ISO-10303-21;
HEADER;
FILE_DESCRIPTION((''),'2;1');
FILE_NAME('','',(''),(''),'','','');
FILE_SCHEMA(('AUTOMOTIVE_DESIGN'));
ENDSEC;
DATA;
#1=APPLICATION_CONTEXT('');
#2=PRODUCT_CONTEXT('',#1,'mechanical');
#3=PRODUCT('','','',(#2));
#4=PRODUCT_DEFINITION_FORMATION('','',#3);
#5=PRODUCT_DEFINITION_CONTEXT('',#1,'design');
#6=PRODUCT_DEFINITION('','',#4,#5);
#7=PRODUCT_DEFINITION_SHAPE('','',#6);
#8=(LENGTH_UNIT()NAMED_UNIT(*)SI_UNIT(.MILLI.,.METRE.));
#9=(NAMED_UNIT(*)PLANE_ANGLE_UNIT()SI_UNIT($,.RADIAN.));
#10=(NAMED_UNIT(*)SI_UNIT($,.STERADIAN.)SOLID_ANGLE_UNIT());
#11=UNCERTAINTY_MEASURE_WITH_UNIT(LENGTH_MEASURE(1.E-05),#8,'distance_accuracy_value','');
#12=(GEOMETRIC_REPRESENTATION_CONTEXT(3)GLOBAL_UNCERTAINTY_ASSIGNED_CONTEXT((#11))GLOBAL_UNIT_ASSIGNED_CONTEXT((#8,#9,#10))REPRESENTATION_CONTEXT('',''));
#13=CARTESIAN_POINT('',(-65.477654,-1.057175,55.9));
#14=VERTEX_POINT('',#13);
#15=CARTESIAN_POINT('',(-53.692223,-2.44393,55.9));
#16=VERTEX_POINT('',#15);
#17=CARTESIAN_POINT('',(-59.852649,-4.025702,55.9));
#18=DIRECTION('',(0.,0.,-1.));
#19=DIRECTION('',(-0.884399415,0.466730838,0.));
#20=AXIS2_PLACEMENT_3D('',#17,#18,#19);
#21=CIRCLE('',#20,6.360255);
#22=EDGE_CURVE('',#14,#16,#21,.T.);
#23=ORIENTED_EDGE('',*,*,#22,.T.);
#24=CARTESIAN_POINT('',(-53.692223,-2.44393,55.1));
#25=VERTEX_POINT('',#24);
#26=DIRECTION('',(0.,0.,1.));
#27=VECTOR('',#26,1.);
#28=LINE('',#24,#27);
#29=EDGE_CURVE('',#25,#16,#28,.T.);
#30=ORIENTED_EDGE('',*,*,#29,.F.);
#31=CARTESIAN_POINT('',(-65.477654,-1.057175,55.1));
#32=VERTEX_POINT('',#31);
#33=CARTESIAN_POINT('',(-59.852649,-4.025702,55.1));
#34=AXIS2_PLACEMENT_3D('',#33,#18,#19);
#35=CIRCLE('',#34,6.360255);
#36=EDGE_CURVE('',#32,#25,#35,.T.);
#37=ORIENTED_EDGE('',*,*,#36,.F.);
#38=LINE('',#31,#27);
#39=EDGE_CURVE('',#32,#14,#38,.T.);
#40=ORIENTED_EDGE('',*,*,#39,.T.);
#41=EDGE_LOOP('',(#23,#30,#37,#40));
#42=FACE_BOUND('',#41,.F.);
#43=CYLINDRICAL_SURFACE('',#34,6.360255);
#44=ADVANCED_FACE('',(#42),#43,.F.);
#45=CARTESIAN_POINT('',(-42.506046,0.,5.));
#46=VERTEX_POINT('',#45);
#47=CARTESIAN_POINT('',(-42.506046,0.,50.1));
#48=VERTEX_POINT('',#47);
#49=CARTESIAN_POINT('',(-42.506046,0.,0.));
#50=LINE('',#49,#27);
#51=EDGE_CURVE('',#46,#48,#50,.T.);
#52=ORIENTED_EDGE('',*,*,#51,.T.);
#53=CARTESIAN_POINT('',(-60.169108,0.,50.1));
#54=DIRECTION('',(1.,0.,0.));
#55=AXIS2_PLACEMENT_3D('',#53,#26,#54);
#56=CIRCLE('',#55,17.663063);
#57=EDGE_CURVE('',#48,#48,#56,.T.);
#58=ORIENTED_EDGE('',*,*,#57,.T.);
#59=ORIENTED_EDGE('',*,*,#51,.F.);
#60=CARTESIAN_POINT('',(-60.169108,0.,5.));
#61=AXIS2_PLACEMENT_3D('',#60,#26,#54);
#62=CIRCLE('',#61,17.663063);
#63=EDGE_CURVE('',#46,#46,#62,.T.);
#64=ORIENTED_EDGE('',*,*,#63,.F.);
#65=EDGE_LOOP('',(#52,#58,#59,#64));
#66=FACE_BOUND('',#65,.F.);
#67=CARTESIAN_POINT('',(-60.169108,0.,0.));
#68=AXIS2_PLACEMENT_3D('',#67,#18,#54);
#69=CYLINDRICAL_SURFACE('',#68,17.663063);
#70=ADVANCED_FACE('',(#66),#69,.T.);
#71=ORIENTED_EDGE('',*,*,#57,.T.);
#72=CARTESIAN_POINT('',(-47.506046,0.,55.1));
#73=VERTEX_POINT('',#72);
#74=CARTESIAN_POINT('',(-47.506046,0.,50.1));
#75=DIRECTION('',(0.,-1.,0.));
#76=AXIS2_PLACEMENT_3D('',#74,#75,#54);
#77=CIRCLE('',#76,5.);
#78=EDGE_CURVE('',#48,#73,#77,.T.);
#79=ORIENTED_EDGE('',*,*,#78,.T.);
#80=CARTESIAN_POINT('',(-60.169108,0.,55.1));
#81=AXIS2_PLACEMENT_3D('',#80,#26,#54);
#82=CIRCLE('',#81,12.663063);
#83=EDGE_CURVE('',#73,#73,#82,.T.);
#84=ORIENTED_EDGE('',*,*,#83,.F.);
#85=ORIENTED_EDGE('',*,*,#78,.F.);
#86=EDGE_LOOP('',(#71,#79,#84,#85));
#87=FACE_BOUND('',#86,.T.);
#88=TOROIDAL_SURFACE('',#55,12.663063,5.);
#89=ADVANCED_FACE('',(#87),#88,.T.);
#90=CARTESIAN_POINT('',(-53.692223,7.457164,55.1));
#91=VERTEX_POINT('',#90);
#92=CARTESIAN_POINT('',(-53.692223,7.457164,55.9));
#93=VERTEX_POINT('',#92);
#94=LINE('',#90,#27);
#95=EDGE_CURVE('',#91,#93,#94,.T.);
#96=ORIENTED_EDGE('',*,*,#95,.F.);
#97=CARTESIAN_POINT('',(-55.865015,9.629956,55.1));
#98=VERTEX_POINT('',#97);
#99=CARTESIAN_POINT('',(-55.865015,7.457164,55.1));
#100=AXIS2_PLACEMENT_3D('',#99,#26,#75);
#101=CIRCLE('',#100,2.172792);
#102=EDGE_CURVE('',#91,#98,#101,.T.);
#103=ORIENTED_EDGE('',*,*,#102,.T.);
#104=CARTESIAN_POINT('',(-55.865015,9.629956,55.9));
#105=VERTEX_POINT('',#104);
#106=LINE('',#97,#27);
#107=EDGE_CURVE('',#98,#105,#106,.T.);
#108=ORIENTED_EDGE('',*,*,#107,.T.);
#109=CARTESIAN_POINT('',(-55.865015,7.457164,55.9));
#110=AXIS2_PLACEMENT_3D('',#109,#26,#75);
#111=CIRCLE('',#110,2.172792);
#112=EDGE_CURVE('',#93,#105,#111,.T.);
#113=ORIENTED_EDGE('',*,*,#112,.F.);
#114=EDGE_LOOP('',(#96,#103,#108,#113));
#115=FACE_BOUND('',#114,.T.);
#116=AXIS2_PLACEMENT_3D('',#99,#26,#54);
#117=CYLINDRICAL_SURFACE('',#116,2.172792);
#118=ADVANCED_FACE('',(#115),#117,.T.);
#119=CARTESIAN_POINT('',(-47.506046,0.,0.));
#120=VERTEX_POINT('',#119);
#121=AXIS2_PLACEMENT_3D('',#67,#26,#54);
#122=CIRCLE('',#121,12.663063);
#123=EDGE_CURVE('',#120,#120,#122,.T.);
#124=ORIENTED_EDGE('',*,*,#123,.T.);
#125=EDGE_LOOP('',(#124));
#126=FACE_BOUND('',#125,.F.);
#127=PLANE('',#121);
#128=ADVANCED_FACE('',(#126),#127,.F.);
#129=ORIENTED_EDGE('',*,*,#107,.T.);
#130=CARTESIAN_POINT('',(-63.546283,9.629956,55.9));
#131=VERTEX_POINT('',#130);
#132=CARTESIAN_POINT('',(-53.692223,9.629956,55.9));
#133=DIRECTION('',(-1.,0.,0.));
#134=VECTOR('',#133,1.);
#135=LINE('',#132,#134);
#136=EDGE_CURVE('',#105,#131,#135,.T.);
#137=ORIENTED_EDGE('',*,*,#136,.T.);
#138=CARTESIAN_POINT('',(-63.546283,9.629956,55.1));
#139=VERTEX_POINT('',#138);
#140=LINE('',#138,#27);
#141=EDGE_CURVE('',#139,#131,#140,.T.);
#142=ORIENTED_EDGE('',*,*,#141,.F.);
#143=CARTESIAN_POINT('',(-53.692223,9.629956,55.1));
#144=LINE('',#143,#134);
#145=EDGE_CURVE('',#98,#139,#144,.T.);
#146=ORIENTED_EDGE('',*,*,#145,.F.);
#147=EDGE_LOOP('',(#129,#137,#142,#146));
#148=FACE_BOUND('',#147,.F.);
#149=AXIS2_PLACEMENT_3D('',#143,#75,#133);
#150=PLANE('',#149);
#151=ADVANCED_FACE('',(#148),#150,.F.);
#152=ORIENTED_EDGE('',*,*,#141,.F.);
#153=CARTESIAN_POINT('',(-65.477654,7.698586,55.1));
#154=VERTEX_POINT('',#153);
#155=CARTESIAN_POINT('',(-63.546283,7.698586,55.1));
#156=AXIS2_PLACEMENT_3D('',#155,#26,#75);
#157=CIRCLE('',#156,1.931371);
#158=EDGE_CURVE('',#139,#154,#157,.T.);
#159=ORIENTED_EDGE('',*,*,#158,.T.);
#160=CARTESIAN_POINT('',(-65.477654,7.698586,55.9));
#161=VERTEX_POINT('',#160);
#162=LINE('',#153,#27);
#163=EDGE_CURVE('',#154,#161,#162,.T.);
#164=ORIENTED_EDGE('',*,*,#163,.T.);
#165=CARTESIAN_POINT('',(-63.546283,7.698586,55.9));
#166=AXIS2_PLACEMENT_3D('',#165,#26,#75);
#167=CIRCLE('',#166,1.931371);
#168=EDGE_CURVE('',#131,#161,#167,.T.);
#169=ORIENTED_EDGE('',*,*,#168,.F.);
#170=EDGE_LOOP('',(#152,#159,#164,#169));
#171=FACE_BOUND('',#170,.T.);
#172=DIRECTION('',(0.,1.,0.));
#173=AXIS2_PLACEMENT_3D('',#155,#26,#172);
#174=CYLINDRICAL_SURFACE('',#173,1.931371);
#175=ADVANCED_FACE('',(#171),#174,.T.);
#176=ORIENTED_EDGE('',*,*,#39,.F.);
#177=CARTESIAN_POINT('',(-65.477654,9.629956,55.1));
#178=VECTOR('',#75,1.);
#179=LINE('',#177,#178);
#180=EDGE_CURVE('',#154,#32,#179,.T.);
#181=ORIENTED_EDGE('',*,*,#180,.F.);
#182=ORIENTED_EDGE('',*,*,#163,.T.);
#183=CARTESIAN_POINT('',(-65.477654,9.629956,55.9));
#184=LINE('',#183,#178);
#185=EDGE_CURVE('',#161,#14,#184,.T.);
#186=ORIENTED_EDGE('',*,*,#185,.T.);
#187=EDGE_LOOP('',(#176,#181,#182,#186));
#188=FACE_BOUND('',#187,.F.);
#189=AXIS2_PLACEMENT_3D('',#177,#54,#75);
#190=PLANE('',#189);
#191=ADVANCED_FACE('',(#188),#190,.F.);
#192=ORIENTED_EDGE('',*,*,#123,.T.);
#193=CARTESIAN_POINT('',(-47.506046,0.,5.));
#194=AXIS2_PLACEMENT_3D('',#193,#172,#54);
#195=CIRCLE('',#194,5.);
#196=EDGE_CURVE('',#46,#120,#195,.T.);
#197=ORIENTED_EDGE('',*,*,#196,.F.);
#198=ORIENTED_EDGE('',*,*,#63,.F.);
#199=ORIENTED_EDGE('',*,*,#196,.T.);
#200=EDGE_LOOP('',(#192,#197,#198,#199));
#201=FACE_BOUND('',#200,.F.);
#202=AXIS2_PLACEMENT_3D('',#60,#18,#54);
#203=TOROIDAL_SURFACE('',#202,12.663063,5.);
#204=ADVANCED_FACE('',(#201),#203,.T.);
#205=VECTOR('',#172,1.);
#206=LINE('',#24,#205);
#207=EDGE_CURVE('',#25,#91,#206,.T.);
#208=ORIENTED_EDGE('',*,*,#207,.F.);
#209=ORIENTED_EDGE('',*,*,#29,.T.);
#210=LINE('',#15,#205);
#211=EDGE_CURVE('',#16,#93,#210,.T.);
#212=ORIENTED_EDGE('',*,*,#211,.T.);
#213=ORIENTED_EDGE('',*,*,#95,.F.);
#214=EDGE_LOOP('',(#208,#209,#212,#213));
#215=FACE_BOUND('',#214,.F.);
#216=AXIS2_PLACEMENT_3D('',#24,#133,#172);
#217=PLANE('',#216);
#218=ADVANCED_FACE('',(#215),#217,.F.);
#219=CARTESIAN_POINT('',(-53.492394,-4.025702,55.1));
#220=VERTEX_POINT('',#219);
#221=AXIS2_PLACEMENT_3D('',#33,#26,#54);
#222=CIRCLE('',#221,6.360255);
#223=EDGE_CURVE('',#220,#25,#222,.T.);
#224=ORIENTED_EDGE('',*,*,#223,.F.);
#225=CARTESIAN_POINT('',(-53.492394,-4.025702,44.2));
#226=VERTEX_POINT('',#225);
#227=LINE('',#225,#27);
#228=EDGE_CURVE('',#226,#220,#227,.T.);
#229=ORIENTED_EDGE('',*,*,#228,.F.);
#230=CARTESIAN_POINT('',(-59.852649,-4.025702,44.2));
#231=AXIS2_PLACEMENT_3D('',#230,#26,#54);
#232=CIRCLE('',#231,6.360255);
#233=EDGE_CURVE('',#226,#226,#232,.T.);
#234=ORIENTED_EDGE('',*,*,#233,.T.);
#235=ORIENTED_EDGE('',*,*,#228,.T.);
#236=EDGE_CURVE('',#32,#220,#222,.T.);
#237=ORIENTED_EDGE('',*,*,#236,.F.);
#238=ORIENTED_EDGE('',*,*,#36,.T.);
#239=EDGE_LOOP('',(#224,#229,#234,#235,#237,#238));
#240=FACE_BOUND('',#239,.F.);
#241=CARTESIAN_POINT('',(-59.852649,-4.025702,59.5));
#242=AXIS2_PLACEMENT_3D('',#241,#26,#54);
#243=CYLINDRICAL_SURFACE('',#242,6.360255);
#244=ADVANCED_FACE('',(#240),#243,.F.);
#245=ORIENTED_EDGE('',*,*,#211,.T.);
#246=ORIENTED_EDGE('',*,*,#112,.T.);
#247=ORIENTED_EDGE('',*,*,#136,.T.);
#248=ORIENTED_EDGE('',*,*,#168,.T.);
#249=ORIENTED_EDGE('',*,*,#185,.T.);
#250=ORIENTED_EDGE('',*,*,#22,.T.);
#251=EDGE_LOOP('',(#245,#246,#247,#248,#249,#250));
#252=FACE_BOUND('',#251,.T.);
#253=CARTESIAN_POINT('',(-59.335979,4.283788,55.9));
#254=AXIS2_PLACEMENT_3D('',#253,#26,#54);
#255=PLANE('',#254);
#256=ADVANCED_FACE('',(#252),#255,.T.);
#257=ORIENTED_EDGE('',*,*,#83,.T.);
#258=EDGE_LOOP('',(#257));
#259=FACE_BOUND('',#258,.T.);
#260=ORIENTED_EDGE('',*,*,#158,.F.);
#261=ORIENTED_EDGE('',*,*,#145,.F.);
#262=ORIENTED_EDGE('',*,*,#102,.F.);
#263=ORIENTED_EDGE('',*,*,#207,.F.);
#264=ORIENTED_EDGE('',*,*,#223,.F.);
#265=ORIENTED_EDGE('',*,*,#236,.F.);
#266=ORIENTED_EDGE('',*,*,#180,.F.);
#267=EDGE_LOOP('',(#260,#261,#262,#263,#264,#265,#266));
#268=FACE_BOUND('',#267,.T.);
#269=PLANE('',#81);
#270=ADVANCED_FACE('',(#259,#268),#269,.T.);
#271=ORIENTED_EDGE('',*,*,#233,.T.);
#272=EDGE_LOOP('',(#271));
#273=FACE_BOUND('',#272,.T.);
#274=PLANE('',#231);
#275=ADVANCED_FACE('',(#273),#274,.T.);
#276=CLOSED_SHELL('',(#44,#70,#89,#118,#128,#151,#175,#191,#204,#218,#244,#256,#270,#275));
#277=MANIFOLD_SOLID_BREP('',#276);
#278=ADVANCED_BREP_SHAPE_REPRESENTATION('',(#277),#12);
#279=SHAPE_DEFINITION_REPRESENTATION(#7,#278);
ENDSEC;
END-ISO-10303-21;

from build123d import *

# Parameters (mm, degrees)
F0_R     = 17.6630626633
F1_DEPTH = 55.1
F2_R     = 5
F3_R     = 6.360255015
F4_DEPTH = 4.4
F5_DEPTH = 9.1
F6_DEPTH = 6.2
F8_DEPTH = 0.8
F9_R     = 2.1727922061
F10_R    = 1.9313708499


# Not quite as in the source:
# - the program builds the solid bodies; features that only make, move or delete a surface that nothing else refers to are left out


with BuildPart() as f1:
    # F0 (on Top) → F1 (new body)
    with BuildSketch(Plane.XY):
        with Locations((-60.169108212, 0)):
            Circle(F0_R)
    extrude(amount=F1_DEPTH)

    # F2
    f2_edges = [f1.edges().sort_by_distance(p)[0] for p in [
        (-77.832171, 0, 0),
        (-77.832171, 0, 55.1),
    ]]
    fillet(f2_edges, radius=F2_R)

    # F3 (on face) → F4 (join)
    with BuildSketch(Plane.XY.offset(55.1)):
        with Locations((-59.8526485264, -4.0257023647)):
            Circle(F3_R)
    extrude(amount=F4_DEPTH)

    # F5 (cut): a face of the model
    f5_faces = [f1.faces().sort_by_distance(p)[0] for p in [
        (-59.8526485264, -4.0257023647, 59.5),
    ]]
    extrude(f5_faces, amount=-F5_DEPTH, mode=Mode.SUBTRACT)

    # F6 (cut): a face of the model
    f6_faces = [f1.faces().sort_by_distance(p)[0] for p in [
        (-59.8526485264, -4.0257023647, 50.4),
    ]]
    extrude(f6_faces, amount=-F6_DEPTH, mode=Mode.SUBTRACT)

    # F7 (on face) → F8 (join)
    with BuildSketch(Plane.XY.offset(55.1)):
        with BuildLine():
            Line((-53.6922231234, 9.6299564466), (-65.4776543379, 9.6299564466))
            Line((-65.4776543379, 9.6299564466), (-65.4776543379, -1.0571752086))
            ThreePointArc((-65.4776543379, -1.0571752086), (-59.1093847847, 2.2909742033), (-53.6922231234, -2.4439303493))
            Line((-53.6922231234, -2.4439303493), (-53.6922231234, 9.6299564466))
        make_face()
    extrude(amount=F8_DEPTH)

    # F9
    f9_edges = [f1.edges().sort_by_distance(p)[0] for p in [
        (-53.692223, 9.629956, 55.5),
    ]]
    fillet(f9_edges, radius=F9_R)

    # F10
    f10_edges = [f1.edges().sort_by_distance(p)[0] for p in [
        (-65.477654, 9.629956, 55.5),
    ]]
    fillet(f10_edges, radius=F10_R)


solid = f1.part
